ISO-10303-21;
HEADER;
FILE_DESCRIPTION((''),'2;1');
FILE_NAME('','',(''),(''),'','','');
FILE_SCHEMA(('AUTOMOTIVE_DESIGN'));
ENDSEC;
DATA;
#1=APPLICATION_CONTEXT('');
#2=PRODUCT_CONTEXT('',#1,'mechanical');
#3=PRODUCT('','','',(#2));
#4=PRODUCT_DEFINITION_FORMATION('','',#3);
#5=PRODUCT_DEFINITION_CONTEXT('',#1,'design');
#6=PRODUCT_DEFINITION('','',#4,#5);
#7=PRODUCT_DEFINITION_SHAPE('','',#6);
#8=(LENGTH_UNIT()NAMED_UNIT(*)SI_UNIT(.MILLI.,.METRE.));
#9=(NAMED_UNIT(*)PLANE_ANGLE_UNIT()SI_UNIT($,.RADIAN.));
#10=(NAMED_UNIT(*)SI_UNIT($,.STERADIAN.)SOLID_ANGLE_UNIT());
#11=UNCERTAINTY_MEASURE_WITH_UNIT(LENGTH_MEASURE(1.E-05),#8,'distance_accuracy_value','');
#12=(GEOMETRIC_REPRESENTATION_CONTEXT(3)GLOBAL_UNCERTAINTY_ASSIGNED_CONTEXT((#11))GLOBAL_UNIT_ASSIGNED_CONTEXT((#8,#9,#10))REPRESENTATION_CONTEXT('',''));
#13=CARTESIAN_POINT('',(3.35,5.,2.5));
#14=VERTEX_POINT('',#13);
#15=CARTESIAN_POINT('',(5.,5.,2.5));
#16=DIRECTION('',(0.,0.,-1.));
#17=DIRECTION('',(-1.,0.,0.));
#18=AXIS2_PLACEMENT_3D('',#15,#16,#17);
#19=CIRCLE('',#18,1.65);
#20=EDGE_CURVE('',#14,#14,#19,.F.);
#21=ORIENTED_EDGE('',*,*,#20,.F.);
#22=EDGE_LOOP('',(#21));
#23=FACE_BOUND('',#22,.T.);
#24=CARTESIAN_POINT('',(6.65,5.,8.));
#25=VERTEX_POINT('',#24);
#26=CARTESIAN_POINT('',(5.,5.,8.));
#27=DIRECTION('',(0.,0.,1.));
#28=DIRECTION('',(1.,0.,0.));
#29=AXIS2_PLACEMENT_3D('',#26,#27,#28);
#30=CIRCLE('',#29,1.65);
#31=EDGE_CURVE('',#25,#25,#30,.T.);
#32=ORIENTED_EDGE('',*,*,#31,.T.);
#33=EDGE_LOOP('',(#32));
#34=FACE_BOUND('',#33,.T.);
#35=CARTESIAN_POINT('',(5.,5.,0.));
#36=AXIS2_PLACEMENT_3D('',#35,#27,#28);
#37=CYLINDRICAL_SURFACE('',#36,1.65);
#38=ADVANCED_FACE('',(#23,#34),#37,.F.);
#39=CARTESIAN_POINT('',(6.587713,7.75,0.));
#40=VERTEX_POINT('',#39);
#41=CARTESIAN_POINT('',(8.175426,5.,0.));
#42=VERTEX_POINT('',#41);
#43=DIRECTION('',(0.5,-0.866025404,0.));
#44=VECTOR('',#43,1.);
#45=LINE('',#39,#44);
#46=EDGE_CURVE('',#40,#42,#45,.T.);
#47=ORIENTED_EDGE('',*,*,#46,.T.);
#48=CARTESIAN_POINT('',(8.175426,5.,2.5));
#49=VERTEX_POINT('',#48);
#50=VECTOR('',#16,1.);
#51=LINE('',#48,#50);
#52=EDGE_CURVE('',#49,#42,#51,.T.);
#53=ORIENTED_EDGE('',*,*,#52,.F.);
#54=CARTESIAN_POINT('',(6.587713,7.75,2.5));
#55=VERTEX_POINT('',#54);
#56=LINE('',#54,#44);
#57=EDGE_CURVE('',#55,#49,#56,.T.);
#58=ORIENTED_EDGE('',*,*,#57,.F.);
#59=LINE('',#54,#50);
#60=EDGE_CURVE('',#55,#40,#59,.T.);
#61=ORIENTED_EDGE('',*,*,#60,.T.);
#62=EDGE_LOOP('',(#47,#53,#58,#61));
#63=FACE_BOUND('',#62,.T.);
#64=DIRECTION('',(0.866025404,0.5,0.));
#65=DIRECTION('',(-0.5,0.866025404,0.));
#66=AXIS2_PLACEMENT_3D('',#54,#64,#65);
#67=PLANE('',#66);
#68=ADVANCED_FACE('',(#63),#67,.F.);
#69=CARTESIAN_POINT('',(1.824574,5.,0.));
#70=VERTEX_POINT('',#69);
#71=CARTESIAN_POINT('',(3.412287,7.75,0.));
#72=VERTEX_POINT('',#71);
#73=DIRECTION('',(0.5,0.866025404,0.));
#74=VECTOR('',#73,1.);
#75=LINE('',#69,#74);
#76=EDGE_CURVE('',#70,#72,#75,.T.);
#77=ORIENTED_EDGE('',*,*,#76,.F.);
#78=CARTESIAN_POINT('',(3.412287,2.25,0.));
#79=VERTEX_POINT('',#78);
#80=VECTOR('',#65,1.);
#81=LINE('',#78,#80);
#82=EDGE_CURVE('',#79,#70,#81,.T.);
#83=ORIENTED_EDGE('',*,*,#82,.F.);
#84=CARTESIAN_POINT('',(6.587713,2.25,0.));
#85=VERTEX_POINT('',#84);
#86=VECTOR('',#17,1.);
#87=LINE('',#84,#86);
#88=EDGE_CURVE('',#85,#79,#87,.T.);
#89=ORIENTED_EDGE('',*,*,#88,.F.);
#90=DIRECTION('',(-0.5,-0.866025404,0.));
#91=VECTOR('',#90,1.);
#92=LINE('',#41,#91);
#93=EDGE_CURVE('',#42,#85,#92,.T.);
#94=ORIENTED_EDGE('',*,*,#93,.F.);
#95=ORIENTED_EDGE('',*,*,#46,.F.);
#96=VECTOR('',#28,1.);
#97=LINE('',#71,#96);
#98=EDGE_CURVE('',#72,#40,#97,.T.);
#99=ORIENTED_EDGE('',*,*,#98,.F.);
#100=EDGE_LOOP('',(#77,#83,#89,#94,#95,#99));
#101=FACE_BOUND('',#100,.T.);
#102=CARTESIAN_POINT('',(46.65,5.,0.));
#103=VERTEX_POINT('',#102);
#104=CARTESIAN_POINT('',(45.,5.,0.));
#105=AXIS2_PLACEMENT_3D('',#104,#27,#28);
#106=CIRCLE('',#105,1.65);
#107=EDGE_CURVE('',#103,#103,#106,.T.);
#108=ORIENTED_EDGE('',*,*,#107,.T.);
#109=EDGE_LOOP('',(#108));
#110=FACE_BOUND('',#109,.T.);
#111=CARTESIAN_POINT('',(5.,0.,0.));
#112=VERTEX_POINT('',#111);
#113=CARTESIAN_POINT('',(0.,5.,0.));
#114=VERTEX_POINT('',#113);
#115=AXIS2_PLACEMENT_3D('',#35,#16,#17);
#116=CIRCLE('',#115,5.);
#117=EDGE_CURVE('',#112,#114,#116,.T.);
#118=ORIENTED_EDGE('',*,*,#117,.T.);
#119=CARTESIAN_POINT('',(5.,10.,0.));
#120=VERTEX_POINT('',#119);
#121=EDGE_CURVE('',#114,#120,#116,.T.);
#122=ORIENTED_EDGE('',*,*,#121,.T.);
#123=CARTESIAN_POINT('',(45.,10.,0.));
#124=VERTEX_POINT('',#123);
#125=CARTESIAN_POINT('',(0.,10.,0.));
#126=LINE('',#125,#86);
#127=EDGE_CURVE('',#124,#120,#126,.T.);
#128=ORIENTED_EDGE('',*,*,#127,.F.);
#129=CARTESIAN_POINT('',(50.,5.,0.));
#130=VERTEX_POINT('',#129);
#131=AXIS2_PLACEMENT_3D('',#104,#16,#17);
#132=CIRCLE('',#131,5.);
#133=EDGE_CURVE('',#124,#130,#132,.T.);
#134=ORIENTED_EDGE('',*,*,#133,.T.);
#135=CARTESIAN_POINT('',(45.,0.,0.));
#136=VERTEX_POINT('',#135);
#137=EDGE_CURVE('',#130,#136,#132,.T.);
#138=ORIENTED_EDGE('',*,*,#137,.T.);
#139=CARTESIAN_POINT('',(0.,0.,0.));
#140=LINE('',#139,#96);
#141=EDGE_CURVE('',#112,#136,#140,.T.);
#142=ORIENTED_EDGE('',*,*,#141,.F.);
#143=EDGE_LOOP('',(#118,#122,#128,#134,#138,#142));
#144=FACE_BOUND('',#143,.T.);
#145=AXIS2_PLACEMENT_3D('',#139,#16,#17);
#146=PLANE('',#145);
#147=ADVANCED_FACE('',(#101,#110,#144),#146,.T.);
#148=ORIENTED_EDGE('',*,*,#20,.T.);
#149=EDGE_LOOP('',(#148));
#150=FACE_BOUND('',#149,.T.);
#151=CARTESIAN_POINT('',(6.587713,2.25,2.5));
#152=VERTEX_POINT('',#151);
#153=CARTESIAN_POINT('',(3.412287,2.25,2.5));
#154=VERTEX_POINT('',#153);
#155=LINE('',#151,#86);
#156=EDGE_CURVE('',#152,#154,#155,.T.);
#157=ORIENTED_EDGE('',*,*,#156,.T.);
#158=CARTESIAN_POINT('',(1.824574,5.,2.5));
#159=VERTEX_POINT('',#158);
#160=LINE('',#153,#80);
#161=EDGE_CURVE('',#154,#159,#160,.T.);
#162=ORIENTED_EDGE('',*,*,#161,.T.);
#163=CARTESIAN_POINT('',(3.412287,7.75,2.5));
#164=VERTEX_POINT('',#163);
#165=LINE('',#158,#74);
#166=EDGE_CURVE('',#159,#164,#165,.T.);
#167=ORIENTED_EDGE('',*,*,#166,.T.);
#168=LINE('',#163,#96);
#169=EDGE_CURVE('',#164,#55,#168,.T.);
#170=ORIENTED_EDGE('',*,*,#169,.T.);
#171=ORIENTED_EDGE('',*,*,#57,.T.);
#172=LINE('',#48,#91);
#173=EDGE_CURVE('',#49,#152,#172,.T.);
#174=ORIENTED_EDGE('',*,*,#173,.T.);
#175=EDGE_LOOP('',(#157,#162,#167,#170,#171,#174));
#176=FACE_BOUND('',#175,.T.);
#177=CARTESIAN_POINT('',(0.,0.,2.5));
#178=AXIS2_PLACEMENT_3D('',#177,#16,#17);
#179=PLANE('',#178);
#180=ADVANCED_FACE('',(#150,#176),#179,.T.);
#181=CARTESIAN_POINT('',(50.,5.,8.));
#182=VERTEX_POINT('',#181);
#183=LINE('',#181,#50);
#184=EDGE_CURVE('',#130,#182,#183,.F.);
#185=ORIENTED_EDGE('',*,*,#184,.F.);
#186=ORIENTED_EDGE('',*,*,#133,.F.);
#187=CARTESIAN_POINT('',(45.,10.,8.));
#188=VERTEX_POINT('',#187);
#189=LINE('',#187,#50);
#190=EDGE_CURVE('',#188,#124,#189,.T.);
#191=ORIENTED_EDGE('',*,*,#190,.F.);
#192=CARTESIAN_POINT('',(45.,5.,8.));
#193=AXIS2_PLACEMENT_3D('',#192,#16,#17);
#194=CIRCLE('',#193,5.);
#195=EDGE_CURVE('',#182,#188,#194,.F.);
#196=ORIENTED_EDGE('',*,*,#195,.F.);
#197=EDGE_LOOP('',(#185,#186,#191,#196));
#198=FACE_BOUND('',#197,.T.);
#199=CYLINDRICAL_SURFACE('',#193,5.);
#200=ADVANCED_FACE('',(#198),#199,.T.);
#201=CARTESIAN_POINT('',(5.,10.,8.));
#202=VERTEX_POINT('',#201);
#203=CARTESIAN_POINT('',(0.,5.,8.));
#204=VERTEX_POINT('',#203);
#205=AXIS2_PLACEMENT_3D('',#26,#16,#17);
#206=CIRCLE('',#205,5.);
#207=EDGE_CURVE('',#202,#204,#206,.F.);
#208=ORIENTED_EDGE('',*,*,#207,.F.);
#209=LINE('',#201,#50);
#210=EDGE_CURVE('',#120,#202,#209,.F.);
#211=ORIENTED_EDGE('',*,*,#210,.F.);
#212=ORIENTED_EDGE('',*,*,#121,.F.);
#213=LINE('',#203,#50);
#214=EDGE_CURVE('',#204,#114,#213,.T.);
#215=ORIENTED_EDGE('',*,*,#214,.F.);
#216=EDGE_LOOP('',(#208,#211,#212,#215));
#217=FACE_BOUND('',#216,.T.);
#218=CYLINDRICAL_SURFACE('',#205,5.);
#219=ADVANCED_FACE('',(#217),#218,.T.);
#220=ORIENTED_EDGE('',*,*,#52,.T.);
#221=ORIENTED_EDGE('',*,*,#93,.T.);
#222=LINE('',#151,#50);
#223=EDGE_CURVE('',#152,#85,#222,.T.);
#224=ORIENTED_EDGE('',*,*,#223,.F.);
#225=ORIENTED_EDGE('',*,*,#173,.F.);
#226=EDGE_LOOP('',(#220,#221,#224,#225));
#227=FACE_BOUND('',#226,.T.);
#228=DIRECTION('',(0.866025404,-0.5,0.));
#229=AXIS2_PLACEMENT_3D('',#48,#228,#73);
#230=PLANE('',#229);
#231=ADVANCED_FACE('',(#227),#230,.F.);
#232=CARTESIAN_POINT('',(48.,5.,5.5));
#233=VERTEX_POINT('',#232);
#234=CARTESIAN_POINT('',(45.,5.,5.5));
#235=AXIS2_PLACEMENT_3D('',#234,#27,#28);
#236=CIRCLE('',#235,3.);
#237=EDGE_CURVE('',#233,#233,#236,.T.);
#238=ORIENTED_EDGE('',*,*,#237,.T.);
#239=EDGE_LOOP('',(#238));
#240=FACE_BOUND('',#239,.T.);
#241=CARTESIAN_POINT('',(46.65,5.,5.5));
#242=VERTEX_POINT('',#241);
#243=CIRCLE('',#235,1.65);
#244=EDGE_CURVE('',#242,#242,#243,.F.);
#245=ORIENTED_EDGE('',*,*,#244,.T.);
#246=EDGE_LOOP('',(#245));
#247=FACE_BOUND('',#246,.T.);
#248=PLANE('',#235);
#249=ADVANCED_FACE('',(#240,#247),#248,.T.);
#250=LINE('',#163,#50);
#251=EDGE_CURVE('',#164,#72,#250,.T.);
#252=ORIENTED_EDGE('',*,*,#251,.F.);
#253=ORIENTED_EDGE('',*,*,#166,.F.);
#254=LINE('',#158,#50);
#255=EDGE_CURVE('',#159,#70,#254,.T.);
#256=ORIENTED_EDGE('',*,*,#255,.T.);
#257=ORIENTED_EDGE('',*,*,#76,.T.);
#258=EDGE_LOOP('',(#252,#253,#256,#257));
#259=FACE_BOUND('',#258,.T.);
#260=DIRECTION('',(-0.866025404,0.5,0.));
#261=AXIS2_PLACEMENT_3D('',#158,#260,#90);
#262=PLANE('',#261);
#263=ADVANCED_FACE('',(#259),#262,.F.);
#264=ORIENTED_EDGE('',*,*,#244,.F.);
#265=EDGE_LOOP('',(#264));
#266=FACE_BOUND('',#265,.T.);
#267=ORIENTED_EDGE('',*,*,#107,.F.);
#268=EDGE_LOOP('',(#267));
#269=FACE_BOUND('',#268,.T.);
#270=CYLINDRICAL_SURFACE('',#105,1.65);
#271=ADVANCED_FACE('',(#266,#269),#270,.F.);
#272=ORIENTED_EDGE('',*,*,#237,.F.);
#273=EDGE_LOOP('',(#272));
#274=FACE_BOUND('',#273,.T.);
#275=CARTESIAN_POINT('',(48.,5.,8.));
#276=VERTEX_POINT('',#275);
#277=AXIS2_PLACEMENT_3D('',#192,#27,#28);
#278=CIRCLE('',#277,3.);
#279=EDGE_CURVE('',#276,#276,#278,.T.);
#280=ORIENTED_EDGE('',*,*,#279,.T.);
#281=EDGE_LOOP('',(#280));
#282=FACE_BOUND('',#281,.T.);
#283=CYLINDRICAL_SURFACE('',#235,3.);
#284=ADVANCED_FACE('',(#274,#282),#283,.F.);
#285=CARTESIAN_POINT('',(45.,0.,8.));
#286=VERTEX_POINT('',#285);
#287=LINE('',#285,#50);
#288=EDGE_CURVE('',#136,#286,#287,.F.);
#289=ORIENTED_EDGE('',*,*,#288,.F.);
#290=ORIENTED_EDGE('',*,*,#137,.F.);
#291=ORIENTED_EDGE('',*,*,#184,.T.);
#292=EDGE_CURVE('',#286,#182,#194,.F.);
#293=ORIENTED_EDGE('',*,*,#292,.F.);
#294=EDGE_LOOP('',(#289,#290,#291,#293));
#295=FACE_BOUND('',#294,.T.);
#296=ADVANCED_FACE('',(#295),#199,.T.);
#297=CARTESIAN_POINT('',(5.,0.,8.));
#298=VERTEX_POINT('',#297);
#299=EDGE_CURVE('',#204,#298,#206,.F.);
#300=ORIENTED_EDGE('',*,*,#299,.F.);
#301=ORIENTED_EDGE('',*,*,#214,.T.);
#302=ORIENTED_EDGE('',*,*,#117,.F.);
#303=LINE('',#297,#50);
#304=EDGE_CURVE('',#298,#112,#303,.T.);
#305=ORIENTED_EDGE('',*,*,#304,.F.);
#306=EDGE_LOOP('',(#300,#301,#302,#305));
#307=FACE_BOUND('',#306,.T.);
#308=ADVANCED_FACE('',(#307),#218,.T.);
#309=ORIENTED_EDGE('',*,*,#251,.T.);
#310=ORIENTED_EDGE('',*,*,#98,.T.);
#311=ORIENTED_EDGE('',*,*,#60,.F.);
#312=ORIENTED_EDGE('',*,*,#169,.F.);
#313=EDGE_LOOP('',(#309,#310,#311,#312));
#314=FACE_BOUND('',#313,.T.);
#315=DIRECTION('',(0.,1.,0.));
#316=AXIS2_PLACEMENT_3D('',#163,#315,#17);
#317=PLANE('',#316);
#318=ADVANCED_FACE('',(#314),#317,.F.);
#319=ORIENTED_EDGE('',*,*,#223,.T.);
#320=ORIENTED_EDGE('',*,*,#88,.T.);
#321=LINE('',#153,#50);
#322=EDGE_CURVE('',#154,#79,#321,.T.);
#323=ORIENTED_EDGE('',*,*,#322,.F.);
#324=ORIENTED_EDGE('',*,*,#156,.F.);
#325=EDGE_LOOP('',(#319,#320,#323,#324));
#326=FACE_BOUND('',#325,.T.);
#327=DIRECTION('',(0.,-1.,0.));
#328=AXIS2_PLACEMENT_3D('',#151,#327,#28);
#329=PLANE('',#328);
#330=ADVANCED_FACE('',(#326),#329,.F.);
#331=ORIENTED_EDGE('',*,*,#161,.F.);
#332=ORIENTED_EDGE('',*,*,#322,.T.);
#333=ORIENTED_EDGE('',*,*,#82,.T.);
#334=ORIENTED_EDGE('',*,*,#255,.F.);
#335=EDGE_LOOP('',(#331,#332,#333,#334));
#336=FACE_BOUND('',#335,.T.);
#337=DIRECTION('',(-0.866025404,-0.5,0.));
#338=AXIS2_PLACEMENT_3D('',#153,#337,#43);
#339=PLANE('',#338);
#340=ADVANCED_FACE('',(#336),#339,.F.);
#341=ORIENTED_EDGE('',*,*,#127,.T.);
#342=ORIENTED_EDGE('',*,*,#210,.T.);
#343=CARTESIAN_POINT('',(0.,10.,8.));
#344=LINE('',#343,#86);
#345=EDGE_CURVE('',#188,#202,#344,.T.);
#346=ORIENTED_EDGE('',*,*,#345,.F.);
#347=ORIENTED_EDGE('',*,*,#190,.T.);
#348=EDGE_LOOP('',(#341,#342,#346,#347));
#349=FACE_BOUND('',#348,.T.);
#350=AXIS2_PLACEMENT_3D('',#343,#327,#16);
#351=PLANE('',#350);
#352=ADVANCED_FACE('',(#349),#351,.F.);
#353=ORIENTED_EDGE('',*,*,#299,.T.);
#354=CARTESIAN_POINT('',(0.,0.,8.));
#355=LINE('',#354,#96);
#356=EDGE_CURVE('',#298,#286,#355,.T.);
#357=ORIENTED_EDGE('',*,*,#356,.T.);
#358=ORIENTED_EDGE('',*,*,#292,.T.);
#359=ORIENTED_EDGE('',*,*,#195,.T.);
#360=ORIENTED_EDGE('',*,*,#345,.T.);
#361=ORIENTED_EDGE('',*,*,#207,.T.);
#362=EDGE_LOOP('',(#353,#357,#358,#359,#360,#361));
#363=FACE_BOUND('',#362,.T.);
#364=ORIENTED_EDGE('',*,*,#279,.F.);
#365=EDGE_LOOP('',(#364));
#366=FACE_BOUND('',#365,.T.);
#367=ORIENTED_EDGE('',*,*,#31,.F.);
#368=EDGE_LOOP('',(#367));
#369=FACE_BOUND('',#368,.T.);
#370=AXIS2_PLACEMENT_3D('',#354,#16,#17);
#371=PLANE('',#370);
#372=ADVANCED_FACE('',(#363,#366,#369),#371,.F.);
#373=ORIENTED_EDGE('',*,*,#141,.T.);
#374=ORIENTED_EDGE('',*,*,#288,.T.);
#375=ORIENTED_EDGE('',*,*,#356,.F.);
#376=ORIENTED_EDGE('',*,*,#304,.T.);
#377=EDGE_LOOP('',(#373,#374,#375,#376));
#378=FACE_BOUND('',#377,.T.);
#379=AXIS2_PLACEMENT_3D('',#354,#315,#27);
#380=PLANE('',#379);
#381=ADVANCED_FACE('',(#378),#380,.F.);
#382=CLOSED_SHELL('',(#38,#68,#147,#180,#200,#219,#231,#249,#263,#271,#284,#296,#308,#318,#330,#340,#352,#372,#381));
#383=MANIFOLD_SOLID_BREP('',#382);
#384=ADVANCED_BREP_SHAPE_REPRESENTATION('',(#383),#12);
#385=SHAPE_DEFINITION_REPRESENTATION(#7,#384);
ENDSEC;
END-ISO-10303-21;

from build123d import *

# Parameters (mm, degrees)
SKICA1_W                 = 50
SKICA1_H                 = 10
P_IDAT_VYSUNUT_M1_DEPTH  = 8
SKICA2_R                 = 1.65
ODEBRAT_VYSUNUT_M1_DEPTH = 52.613951602
ZAOBLIT2_R               = 5
SKICA3_R                 = 3
ODEBRAT_VYSUNUT_M2_DEPTH = 2.5
ODEBRAT_VYSUNUT_M3_DEPTH = 2.5


with BuildPart() as part:
    # Skica1 → Přidat vysunutím1 (new body)
    with BuildSketch(Plane.XY):
        with Locations((25, 5)):
            Rectangle(SKICA1_W, SKICA1_H)
    extrude(amount=P_IDAT_VYSUNUT_M1_DEPTH)

    # Skica2 → Odebrat vysunutím1 (cut, through all)
    with BuildSketch(Plane.XY.offset(8)):
        with Locations((5, 5)):
            Circle(SKICA2_R)
        with Locations((45, 5)):
            Circle(SKICA2_R)
    extrude(amount=-ODEBRAT_VYSUNUT_M1_DEPTH, mode=Mode.SUBTRACT)

    # Zaoblit2
    zaoblit2_edges = [part.edges().sort_by_distance(p)[0] for p in [
        (50, 0, 4),
        (50, 10, 4),
        (0, 0, 4),
        (0, 10, 4),
    ]]
    fillet(zaoblit2_edges, radius=ZAOBLIT2_R - 0.0001)  # a hair under: the kernel refuses the full size

    # Skica3 → Odebrat vysunutím2 (cut)
    with BuildSketch(Plane.XY.offset(8)):
        with Locations((45, 5)):
            Circle(SKICA3_R)
    extrude(amount=-ODEBRAT_VYSUNUT_M2_DEPTH, mode=Mode.SUBTRACT)

    # Skica4 → Odebrat vysunutím3 (cut)
    with BuildSketch(Plane(origin=(0, 0, 0), x_dir=(-1, 0, 0), z_dir=(0, 0, -1))):
        Polygon((-6.58771324, 7.75), (-8.175426481, 5), (-6.58771324, 2.25), (-3.41228676, 2.25), (-1.824573519, 5), (-3.41228676, 7.75), align=None)
    extrude(amount=-ODEBRAT_VYSUNUT_M3_DEPTH, mode=Mode.SUBTRACT)


solid = part.part
